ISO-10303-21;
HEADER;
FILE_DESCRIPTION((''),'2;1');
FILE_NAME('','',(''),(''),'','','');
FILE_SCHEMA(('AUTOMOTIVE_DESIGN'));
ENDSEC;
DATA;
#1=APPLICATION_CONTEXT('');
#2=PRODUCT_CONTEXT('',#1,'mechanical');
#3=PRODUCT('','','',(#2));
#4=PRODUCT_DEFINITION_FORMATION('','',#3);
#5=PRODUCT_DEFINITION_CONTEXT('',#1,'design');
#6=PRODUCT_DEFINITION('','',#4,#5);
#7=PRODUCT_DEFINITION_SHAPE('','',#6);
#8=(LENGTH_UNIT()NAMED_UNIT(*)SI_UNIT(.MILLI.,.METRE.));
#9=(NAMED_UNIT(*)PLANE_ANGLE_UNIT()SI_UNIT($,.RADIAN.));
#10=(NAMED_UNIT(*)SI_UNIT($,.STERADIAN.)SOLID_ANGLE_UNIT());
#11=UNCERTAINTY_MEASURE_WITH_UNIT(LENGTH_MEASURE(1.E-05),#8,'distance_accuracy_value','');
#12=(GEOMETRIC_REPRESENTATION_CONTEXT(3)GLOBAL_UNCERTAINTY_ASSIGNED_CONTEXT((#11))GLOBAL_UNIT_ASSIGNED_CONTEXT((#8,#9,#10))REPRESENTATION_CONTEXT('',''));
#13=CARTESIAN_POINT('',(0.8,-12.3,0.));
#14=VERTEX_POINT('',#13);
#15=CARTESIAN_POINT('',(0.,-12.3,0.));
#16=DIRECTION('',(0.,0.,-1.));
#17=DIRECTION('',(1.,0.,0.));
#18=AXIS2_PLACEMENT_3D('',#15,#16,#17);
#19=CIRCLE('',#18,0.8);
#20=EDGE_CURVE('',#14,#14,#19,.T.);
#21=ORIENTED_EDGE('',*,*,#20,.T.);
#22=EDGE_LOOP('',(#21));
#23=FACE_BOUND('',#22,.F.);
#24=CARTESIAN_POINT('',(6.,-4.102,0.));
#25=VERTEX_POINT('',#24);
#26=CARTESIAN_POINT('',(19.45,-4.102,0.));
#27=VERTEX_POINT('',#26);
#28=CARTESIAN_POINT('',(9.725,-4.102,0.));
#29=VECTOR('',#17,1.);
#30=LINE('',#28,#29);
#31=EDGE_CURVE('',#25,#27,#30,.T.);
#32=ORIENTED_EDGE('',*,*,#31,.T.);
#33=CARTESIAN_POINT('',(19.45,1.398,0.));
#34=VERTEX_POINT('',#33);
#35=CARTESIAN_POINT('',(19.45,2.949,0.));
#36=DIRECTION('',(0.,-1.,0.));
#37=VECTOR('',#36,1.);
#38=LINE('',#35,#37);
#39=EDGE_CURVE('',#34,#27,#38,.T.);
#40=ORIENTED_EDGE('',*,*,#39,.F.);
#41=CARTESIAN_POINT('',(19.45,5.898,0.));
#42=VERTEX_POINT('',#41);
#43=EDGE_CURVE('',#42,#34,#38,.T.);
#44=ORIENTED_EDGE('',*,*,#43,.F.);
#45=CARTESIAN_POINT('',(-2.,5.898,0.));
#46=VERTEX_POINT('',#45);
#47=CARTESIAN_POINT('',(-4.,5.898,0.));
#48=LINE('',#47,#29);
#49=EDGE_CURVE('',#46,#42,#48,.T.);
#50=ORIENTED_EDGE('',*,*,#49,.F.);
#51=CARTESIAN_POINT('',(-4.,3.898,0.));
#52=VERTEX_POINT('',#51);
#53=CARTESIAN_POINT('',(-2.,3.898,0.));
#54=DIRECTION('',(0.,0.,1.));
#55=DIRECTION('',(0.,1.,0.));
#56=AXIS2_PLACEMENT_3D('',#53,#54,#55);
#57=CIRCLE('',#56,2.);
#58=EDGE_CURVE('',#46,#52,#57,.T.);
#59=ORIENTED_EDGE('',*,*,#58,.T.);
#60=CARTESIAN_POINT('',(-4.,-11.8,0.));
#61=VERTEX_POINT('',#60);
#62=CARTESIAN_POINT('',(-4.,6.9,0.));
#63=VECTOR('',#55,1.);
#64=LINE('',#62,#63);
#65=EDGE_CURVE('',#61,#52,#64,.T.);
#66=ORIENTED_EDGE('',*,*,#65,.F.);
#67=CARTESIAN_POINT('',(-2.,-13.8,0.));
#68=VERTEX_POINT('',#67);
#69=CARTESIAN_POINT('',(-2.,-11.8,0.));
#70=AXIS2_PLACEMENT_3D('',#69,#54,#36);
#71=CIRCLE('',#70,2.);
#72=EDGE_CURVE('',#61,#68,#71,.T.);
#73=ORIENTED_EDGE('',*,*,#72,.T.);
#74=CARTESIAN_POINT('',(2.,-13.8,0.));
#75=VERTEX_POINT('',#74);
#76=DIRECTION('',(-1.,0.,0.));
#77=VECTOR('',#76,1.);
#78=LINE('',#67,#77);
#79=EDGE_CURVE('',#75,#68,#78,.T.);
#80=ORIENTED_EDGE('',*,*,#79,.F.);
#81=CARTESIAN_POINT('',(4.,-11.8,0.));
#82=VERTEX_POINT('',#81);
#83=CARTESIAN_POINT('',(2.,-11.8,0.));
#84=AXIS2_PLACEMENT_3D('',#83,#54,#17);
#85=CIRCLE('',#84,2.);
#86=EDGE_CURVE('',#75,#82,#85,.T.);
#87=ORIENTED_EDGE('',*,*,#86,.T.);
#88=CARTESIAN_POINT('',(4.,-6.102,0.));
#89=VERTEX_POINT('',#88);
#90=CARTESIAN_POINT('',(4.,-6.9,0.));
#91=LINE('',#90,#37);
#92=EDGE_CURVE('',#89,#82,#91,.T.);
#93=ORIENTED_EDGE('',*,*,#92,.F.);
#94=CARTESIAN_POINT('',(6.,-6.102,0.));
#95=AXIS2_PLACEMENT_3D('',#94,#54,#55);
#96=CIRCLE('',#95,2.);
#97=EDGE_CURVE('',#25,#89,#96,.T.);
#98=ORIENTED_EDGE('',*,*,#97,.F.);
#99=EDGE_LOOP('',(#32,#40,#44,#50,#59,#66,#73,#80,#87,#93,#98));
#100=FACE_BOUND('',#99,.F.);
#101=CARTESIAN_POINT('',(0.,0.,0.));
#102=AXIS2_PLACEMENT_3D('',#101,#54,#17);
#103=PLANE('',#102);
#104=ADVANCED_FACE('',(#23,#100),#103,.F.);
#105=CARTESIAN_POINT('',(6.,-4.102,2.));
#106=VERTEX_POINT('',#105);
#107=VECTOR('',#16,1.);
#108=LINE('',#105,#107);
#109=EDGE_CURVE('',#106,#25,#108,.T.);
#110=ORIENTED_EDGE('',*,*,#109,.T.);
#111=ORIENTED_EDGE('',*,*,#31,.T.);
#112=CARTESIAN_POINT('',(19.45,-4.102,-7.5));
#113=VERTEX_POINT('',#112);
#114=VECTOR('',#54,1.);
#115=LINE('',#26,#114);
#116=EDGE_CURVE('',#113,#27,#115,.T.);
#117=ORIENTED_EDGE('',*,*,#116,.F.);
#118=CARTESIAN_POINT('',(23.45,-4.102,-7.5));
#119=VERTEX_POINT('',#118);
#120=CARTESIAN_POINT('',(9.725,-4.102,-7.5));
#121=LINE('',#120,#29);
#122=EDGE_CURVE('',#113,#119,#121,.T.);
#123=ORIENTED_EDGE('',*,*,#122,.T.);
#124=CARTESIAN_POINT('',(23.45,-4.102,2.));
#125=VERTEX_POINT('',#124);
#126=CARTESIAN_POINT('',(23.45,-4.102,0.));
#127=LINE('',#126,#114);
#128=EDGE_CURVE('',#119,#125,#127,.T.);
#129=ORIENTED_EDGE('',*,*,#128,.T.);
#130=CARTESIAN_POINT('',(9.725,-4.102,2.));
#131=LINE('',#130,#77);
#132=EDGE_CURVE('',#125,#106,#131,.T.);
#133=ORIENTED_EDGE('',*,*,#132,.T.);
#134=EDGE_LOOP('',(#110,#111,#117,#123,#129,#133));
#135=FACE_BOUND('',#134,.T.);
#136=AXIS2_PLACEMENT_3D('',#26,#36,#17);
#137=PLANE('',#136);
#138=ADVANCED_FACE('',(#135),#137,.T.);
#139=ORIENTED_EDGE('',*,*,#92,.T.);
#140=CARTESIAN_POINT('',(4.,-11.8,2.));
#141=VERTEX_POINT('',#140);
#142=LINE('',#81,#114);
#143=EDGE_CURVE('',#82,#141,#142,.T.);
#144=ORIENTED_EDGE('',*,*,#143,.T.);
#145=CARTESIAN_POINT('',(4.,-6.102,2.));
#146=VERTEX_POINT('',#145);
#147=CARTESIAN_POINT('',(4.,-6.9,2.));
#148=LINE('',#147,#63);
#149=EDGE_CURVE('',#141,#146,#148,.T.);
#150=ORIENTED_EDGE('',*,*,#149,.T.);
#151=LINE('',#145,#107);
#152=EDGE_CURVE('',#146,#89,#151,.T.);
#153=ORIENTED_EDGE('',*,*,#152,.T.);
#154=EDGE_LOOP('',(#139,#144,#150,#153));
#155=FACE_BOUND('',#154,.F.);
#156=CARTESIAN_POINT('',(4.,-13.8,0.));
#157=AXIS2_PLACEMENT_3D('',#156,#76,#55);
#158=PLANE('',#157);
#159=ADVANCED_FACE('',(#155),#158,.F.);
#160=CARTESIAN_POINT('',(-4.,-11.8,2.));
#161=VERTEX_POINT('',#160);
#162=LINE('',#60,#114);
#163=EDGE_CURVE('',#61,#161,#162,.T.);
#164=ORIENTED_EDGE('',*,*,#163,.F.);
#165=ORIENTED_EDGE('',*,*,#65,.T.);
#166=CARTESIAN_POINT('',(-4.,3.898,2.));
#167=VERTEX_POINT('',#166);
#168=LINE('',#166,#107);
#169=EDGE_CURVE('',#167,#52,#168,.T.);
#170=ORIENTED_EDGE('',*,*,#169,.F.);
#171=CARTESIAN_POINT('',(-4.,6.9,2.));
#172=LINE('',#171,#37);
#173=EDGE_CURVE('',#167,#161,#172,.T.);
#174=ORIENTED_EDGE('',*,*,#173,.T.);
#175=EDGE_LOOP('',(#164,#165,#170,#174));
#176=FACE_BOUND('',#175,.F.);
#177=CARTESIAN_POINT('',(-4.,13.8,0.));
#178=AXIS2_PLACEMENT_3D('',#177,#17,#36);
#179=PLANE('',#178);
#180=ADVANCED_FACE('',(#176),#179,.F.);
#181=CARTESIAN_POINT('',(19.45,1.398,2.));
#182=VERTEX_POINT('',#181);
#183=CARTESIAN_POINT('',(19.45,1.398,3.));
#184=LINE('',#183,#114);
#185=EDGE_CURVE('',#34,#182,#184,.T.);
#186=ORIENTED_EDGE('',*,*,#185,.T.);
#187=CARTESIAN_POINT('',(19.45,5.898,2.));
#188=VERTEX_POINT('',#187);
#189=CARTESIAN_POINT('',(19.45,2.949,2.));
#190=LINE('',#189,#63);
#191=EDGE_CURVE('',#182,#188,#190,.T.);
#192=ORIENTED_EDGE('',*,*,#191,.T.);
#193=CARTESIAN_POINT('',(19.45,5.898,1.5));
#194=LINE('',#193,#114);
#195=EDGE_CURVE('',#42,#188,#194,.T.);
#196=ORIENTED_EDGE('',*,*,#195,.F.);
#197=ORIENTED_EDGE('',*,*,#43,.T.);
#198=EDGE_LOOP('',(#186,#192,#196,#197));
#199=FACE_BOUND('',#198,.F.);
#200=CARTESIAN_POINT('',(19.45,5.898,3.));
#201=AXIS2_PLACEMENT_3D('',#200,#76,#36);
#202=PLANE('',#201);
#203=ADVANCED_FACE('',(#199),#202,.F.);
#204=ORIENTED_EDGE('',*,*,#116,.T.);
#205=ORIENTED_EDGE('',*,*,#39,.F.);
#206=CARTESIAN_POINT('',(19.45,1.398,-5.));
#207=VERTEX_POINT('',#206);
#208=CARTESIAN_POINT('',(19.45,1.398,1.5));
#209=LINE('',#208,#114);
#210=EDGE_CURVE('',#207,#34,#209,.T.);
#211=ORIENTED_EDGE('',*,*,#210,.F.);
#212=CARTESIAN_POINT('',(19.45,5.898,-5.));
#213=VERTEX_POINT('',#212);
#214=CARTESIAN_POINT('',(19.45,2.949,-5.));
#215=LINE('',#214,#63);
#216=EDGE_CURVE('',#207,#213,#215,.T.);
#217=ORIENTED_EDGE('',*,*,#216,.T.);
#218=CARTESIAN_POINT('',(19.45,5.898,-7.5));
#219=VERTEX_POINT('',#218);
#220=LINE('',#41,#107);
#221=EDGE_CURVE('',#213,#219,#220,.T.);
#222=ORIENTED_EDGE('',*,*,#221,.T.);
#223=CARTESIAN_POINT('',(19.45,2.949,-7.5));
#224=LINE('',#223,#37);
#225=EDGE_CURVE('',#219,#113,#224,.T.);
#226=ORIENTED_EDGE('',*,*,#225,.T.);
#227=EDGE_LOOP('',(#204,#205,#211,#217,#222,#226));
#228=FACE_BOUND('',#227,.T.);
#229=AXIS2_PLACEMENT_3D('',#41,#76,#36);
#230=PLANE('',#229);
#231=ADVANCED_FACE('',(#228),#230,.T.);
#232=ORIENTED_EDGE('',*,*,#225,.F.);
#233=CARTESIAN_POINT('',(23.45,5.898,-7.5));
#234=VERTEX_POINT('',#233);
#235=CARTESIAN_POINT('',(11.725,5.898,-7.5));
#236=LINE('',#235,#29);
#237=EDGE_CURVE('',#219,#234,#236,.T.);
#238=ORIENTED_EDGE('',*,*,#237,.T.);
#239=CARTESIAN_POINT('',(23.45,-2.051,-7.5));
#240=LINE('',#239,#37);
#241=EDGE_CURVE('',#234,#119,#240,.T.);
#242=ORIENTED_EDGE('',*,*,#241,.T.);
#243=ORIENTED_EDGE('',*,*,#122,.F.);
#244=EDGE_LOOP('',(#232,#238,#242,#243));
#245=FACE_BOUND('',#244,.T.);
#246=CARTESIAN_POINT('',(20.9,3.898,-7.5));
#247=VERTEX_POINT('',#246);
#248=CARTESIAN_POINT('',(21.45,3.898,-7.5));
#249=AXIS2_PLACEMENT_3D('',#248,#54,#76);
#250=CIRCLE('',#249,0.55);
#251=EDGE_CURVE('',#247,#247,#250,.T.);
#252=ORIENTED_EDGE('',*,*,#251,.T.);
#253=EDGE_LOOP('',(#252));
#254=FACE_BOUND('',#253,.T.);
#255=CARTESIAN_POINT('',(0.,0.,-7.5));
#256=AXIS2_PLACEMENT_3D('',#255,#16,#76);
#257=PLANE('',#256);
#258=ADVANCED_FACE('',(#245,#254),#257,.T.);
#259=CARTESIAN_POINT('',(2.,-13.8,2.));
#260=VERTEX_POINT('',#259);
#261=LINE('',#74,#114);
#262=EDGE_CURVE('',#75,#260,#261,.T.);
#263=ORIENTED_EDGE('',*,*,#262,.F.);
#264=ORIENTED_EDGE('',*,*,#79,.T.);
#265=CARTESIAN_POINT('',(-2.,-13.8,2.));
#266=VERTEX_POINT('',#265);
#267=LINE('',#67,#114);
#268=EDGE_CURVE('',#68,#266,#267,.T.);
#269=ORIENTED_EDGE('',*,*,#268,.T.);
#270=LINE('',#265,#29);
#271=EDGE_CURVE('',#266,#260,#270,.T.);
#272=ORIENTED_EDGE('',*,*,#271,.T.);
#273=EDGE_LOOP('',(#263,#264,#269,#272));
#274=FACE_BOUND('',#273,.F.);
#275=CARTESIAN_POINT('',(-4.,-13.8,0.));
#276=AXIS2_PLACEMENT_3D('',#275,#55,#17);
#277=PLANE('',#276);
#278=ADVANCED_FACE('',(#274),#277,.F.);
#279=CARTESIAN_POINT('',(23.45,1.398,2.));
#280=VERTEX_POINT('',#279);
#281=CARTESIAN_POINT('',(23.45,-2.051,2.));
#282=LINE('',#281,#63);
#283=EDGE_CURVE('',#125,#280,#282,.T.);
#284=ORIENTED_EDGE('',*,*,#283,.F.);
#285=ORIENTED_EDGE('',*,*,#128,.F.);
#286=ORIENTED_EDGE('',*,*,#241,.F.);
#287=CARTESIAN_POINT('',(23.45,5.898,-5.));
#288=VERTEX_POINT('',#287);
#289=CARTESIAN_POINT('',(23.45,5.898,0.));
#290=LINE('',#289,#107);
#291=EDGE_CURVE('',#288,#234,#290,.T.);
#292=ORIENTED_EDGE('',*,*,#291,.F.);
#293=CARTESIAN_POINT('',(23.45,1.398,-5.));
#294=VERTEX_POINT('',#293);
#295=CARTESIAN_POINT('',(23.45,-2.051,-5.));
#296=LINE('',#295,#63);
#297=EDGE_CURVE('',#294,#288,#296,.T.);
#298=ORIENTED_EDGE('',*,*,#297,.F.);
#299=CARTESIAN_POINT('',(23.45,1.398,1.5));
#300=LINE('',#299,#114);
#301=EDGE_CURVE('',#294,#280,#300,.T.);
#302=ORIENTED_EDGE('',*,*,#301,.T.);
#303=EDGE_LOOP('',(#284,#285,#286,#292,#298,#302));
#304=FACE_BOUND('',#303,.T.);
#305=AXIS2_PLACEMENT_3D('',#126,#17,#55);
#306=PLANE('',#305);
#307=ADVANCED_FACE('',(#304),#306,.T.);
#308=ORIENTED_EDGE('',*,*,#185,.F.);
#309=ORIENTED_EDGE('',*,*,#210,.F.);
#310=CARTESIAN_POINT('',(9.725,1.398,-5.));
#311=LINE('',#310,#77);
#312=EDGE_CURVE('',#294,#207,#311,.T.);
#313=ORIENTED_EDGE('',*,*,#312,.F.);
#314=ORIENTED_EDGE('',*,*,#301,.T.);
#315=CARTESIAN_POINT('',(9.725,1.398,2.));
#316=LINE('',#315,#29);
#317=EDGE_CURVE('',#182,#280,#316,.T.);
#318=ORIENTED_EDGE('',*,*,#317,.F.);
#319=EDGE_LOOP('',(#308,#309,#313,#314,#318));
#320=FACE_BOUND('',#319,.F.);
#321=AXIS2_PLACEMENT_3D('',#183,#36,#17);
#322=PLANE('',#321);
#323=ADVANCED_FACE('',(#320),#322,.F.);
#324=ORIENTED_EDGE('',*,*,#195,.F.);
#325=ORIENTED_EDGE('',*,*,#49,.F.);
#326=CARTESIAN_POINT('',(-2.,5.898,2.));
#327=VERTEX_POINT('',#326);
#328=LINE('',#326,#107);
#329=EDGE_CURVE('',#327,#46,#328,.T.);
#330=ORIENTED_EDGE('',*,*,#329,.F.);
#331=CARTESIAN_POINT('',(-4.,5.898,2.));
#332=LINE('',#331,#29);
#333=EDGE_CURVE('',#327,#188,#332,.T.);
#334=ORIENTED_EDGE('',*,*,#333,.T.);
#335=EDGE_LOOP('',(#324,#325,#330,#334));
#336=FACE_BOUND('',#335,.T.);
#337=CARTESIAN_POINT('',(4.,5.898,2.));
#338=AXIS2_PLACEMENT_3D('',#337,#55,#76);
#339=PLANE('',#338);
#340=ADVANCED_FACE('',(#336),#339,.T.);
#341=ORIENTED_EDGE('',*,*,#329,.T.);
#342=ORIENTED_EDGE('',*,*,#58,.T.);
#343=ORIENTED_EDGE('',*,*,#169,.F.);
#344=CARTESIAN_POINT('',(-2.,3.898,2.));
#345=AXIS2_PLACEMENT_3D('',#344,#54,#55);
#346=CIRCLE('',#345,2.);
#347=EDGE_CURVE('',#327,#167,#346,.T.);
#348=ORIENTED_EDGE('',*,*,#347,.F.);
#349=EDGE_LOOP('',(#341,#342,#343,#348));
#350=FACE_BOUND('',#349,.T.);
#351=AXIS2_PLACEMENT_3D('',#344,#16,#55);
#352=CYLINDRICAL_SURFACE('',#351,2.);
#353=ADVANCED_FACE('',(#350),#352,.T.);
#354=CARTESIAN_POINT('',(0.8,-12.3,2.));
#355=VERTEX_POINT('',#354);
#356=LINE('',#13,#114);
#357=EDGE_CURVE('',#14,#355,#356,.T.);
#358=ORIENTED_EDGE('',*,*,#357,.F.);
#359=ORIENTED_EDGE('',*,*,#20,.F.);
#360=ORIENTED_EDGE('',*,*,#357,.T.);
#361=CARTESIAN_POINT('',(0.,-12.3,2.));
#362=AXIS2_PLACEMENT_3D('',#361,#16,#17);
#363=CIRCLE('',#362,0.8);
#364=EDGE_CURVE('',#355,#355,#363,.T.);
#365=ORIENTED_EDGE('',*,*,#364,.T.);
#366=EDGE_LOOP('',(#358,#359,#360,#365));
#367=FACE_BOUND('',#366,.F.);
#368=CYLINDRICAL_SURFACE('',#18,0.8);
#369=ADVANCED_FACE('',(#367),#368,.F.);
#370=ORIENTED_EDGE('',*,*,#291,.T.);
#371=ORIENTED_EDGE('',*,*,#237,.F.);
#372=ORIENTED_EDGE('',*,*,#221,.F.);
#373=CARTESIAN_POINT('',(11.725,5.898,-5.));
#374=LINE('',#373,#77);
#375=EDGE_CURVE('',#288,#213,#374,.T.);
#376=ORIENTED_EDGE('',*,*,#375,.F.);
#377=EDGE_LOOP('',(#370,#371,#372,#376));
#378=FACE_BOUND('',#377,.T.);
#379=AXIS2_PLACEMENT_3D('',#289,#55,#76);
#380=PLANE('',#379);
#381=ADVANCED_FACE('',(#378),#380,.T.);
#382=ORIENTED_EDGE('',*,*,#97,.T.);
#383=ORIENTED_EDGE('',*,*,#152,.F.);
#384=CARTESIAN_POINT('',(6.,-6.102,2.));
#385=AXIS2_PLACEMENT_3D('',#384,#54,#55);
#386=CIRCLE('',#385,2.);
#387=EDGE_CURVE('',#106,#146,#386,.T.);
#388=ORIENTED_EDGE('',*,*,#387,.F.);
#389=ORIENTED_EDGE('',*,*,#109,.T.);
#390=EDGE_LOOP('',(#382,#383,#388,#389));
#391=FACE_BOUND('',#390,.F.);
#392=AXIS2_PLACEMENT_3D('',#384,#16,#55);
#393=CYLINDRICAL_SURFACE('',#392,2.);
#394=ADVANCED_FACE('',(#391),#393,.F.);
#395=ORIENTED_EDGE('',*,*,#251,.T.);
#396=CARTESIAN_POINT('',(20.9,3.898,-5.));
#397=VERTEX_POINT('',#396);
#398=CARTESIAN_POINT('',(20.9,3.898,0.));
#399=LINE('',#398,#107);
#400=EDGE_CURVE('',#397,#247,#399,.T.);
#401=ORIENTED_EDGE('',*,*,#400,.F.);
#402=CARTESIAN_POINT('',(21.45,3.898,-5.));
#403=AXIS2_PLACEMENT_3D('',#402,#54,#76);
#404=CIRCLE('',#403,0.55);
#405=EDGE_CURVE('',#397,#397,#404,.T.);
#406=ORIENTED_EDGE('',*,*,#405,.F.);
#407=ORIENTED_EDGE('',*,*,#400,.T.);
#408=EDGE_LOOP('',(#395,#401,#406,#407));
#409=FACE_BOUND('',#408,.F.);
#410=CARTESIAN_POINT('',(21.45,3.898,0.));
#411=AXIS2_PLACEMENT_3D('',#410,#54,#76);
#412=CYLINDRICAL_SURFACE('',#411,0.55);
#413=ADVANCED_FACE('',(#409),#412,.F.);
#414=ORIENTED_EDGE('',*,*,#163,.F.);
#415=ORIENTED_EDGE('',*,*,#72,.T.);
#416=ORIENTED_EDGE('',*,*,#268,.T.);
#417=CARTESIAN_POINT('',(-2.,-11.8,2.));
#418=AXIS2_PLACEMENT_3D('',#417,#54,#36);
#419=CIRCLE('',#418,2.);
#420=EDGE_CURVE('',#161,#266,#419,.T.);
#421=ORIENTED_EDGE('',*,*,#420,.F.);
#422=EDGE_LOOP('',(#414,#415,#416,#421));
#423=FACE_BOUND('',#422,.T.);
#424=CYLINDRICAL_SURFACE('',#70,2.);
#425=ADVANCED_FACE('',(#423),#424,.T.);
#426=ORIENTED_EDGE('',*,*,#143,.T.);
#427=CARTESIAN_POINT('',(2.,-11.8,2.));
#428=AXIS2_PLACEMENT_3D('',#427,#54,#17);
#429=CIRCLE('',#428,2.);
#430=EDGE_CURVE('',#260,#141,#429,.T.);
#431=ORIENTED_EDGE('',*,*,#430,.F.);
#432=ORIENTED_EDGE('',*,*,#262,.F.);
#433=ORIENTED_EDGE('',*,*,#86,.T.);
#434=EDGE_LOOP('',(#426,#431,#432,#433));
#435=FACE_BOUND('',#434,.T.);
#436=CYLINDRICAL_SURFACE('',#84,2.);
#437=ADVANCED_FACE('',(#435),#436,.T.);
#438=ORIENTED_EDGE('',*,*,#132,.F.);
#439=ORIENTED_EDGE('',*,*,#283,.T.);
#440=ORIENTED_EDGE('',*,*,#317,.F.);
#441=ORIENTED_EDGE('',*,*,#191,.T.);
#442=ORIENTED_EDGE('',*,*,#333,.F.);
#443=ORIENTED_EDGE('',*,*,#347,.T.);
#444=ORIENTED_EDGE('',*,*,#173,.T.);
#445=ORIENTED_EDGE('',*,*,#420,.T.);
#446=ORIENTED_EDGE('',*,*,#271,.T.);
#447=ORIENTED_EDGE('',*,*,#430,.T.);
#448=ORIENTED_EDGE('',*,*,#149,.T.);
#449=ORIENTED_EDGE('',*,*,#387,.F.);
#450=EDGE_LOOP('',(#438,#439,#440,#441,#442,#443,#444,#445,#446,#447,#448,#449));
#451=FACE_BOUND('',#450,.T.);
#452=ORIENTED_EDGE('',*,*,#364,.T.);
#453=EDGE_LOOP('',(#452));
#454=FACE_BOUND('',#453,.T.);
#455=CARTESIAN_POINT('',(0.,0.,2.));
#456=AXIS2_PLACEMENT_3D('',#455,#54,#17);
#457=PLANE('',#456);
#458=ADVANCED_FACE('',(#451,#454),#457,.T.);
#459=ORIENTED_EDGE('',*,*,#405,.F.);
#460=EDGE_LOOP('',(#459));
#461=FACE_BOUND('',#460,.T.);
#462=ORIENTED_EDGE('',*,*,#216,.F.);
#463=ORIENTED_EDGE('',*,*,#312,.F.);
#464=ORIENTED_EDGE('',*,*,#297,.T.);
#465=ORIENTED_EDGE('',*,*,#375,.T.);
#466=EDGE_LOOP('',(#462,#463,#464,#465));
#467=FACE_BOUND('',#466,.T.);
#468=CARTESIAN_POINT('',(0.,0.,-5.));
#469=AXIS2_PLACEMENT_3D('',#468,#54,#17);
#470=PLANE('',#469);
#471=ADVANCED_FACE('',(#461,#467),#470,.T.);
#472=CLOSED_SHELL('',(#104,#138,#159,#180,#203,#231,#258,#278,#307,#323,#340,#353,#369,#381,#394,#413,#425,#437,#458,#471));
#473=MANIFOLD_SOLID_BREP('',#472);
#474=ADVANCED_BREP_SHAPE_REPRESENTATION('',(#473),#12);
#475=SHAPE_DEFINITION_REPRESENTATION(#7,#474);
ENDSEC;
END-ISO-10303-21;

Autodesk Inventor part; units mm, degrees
ref_plane "YZ Plane" through (0, 0, 0) normal (1, 0, 0) x (0, 1, 0)
ref_plane "XZ Plane" through (0, 0, 0) normal (0, 1, 0) x (-1, 0, 0)
sketch "スケッチ1" plane through (0, 0, 0) normal (0, 0, 1) x (1, 0, 0)
  circle A0 centre (0, 12.3) radius 0.8
  circle A1 centre (0, -12.3) radius 0.8
  line L0 (-4, -13.8) -> (4, -13.8)
  line L1 (4, -13.8) -> (4, 13.8)
  line L2 (4, 13.8) -> (-4, 13.8)
  line L3 (-4, 13.8) -> (-4, -13.8)
  line L4 (-4, -13.8) -> (4, 13.8) construction
  line L5 (4, -13.8) -> (-4, 13.8) construction
  point P0 (0, 0)
  dimension "d0" = 1.6
  dimension "d1" = 24.6
  dimension "d2" = 12.3
  dimension "d3" = 1.5
  dimension "d4" = 4
extrude "押し出し1" add sketch "スケッチ1" along normal blind 3
sketch "スケッチ2" plane through (0, 0, 3) normal (0, 0, 1) x (1, 0, 0)
  circle A0 centre (21.45, 3.898) radius 0.55 projected
  line L0 (19.45, 5.898) -> (19.45, -4.102) projected
  line L1 (19.45, -4.102) -> (23.45, -4.102) projected
  line L2 (23.45, -4.102) -> (23.45, 5.898) projected
  line L3 (23.45, 5.898) -> (19.45, 5.898) projected
  line L4 (23.45, -4.102) -> (4, -4.102)
  line L5 (4, -4.102) -> (4, 5.898)
  line L6 (4, 5.898) -> (23.45, 5.898)
  line L7 (23.45, 5.898) -> (23.45, -4.102)
  line L8 (4, -13.8) -> (4, 13.8) projected
  point P0 (0, 0)
extrude "押し出し2" add sketch "スケッチ2" against normal up to surface (3 mm away)
sketch "スケッチ3" plane through (0, 0, 0) normal (0, 0, -1) x (-1, 0, 0)
  circle A0 centre (-21.45, 3.898) radius 0.55 projected
  line L0 (-19.45, 5.898) -> (-19.45, -4.102) projected
  line L1 (-19.45, -4.102) -> (-23.45, -4.102) projected
  line L2 (-23.45, -4.102) -> (-23.45, 5.898) projected
  line L3 (-23.45, 5.898) -> (-19.45, 5.898) projected
  point P0 (0, 0)
ref_plane "作業平面1" through (19.45, -4.102, -7.5) normal (0, 0, 1) x (1, 0, 0)
extrude "押し出し3" add sketch "スケッチ3" along normal up to surface (7.5 mm away)
sketch "スケッチ4" plane through (0, 0, 3) normal (0, 0, 1) x (1, 0, 0)
  line L0 (23.45, -4.102) -> (23.45, 5.898) projected
  line L1 (19.45, 5.898) -> (19.45, -4.102) projected
  line L2 (23.45, 5.898) -> (19.45, 5.898)
  line L3 (19.45, 5.898) -> (19.45, 1.398)
  line L4 (19.45, 1.398) -> (23.45, 1.398)
  line L5 (23.45, 1.398) -> (23.45, 5.898)
  point P0 (0, 0)
  dimension "d11" = 4.5
extrude "押し出し4" cut sketch "スケッチ4" against normal blind 8
fillet "フィレット1" radius 2 4 edges at (4, -13.8, 1.5) (-4, -13.8, 1.5) (4, 13.8, 1.5) (-4, 13.8, 1.5)
move faces "移動1" translate (0, 0, -1) faces at (-1.3333, -1.3673, 3)
sketch "スケッチ5" plane through (4, -4.102, 2) normal (0, 0, 1) x (1, 0, 0)
  line L0 (15.45, 10) -> (0, 10) projected
  line L1 (0, 10) -> (-8, 10)
  line L2 (-8, 10) -> (-8, 17.902)
  line L3 (-8, 17.902) -> (0, 17.902)
  line L4 (0, 17.902) -> (0, 10)
  point P0 (-4, 4.102)
  point P1 (-8, 15.902)
  point P2 (-6, 17.902)
extrude "押し出し5" cut sketch "スケッチ5" against normal through all
fillet "フィレット2" radius 2 2 edges at (4, -4.102, 1) (-4, 5.898, 1)
properties part number "HbServoCover"
